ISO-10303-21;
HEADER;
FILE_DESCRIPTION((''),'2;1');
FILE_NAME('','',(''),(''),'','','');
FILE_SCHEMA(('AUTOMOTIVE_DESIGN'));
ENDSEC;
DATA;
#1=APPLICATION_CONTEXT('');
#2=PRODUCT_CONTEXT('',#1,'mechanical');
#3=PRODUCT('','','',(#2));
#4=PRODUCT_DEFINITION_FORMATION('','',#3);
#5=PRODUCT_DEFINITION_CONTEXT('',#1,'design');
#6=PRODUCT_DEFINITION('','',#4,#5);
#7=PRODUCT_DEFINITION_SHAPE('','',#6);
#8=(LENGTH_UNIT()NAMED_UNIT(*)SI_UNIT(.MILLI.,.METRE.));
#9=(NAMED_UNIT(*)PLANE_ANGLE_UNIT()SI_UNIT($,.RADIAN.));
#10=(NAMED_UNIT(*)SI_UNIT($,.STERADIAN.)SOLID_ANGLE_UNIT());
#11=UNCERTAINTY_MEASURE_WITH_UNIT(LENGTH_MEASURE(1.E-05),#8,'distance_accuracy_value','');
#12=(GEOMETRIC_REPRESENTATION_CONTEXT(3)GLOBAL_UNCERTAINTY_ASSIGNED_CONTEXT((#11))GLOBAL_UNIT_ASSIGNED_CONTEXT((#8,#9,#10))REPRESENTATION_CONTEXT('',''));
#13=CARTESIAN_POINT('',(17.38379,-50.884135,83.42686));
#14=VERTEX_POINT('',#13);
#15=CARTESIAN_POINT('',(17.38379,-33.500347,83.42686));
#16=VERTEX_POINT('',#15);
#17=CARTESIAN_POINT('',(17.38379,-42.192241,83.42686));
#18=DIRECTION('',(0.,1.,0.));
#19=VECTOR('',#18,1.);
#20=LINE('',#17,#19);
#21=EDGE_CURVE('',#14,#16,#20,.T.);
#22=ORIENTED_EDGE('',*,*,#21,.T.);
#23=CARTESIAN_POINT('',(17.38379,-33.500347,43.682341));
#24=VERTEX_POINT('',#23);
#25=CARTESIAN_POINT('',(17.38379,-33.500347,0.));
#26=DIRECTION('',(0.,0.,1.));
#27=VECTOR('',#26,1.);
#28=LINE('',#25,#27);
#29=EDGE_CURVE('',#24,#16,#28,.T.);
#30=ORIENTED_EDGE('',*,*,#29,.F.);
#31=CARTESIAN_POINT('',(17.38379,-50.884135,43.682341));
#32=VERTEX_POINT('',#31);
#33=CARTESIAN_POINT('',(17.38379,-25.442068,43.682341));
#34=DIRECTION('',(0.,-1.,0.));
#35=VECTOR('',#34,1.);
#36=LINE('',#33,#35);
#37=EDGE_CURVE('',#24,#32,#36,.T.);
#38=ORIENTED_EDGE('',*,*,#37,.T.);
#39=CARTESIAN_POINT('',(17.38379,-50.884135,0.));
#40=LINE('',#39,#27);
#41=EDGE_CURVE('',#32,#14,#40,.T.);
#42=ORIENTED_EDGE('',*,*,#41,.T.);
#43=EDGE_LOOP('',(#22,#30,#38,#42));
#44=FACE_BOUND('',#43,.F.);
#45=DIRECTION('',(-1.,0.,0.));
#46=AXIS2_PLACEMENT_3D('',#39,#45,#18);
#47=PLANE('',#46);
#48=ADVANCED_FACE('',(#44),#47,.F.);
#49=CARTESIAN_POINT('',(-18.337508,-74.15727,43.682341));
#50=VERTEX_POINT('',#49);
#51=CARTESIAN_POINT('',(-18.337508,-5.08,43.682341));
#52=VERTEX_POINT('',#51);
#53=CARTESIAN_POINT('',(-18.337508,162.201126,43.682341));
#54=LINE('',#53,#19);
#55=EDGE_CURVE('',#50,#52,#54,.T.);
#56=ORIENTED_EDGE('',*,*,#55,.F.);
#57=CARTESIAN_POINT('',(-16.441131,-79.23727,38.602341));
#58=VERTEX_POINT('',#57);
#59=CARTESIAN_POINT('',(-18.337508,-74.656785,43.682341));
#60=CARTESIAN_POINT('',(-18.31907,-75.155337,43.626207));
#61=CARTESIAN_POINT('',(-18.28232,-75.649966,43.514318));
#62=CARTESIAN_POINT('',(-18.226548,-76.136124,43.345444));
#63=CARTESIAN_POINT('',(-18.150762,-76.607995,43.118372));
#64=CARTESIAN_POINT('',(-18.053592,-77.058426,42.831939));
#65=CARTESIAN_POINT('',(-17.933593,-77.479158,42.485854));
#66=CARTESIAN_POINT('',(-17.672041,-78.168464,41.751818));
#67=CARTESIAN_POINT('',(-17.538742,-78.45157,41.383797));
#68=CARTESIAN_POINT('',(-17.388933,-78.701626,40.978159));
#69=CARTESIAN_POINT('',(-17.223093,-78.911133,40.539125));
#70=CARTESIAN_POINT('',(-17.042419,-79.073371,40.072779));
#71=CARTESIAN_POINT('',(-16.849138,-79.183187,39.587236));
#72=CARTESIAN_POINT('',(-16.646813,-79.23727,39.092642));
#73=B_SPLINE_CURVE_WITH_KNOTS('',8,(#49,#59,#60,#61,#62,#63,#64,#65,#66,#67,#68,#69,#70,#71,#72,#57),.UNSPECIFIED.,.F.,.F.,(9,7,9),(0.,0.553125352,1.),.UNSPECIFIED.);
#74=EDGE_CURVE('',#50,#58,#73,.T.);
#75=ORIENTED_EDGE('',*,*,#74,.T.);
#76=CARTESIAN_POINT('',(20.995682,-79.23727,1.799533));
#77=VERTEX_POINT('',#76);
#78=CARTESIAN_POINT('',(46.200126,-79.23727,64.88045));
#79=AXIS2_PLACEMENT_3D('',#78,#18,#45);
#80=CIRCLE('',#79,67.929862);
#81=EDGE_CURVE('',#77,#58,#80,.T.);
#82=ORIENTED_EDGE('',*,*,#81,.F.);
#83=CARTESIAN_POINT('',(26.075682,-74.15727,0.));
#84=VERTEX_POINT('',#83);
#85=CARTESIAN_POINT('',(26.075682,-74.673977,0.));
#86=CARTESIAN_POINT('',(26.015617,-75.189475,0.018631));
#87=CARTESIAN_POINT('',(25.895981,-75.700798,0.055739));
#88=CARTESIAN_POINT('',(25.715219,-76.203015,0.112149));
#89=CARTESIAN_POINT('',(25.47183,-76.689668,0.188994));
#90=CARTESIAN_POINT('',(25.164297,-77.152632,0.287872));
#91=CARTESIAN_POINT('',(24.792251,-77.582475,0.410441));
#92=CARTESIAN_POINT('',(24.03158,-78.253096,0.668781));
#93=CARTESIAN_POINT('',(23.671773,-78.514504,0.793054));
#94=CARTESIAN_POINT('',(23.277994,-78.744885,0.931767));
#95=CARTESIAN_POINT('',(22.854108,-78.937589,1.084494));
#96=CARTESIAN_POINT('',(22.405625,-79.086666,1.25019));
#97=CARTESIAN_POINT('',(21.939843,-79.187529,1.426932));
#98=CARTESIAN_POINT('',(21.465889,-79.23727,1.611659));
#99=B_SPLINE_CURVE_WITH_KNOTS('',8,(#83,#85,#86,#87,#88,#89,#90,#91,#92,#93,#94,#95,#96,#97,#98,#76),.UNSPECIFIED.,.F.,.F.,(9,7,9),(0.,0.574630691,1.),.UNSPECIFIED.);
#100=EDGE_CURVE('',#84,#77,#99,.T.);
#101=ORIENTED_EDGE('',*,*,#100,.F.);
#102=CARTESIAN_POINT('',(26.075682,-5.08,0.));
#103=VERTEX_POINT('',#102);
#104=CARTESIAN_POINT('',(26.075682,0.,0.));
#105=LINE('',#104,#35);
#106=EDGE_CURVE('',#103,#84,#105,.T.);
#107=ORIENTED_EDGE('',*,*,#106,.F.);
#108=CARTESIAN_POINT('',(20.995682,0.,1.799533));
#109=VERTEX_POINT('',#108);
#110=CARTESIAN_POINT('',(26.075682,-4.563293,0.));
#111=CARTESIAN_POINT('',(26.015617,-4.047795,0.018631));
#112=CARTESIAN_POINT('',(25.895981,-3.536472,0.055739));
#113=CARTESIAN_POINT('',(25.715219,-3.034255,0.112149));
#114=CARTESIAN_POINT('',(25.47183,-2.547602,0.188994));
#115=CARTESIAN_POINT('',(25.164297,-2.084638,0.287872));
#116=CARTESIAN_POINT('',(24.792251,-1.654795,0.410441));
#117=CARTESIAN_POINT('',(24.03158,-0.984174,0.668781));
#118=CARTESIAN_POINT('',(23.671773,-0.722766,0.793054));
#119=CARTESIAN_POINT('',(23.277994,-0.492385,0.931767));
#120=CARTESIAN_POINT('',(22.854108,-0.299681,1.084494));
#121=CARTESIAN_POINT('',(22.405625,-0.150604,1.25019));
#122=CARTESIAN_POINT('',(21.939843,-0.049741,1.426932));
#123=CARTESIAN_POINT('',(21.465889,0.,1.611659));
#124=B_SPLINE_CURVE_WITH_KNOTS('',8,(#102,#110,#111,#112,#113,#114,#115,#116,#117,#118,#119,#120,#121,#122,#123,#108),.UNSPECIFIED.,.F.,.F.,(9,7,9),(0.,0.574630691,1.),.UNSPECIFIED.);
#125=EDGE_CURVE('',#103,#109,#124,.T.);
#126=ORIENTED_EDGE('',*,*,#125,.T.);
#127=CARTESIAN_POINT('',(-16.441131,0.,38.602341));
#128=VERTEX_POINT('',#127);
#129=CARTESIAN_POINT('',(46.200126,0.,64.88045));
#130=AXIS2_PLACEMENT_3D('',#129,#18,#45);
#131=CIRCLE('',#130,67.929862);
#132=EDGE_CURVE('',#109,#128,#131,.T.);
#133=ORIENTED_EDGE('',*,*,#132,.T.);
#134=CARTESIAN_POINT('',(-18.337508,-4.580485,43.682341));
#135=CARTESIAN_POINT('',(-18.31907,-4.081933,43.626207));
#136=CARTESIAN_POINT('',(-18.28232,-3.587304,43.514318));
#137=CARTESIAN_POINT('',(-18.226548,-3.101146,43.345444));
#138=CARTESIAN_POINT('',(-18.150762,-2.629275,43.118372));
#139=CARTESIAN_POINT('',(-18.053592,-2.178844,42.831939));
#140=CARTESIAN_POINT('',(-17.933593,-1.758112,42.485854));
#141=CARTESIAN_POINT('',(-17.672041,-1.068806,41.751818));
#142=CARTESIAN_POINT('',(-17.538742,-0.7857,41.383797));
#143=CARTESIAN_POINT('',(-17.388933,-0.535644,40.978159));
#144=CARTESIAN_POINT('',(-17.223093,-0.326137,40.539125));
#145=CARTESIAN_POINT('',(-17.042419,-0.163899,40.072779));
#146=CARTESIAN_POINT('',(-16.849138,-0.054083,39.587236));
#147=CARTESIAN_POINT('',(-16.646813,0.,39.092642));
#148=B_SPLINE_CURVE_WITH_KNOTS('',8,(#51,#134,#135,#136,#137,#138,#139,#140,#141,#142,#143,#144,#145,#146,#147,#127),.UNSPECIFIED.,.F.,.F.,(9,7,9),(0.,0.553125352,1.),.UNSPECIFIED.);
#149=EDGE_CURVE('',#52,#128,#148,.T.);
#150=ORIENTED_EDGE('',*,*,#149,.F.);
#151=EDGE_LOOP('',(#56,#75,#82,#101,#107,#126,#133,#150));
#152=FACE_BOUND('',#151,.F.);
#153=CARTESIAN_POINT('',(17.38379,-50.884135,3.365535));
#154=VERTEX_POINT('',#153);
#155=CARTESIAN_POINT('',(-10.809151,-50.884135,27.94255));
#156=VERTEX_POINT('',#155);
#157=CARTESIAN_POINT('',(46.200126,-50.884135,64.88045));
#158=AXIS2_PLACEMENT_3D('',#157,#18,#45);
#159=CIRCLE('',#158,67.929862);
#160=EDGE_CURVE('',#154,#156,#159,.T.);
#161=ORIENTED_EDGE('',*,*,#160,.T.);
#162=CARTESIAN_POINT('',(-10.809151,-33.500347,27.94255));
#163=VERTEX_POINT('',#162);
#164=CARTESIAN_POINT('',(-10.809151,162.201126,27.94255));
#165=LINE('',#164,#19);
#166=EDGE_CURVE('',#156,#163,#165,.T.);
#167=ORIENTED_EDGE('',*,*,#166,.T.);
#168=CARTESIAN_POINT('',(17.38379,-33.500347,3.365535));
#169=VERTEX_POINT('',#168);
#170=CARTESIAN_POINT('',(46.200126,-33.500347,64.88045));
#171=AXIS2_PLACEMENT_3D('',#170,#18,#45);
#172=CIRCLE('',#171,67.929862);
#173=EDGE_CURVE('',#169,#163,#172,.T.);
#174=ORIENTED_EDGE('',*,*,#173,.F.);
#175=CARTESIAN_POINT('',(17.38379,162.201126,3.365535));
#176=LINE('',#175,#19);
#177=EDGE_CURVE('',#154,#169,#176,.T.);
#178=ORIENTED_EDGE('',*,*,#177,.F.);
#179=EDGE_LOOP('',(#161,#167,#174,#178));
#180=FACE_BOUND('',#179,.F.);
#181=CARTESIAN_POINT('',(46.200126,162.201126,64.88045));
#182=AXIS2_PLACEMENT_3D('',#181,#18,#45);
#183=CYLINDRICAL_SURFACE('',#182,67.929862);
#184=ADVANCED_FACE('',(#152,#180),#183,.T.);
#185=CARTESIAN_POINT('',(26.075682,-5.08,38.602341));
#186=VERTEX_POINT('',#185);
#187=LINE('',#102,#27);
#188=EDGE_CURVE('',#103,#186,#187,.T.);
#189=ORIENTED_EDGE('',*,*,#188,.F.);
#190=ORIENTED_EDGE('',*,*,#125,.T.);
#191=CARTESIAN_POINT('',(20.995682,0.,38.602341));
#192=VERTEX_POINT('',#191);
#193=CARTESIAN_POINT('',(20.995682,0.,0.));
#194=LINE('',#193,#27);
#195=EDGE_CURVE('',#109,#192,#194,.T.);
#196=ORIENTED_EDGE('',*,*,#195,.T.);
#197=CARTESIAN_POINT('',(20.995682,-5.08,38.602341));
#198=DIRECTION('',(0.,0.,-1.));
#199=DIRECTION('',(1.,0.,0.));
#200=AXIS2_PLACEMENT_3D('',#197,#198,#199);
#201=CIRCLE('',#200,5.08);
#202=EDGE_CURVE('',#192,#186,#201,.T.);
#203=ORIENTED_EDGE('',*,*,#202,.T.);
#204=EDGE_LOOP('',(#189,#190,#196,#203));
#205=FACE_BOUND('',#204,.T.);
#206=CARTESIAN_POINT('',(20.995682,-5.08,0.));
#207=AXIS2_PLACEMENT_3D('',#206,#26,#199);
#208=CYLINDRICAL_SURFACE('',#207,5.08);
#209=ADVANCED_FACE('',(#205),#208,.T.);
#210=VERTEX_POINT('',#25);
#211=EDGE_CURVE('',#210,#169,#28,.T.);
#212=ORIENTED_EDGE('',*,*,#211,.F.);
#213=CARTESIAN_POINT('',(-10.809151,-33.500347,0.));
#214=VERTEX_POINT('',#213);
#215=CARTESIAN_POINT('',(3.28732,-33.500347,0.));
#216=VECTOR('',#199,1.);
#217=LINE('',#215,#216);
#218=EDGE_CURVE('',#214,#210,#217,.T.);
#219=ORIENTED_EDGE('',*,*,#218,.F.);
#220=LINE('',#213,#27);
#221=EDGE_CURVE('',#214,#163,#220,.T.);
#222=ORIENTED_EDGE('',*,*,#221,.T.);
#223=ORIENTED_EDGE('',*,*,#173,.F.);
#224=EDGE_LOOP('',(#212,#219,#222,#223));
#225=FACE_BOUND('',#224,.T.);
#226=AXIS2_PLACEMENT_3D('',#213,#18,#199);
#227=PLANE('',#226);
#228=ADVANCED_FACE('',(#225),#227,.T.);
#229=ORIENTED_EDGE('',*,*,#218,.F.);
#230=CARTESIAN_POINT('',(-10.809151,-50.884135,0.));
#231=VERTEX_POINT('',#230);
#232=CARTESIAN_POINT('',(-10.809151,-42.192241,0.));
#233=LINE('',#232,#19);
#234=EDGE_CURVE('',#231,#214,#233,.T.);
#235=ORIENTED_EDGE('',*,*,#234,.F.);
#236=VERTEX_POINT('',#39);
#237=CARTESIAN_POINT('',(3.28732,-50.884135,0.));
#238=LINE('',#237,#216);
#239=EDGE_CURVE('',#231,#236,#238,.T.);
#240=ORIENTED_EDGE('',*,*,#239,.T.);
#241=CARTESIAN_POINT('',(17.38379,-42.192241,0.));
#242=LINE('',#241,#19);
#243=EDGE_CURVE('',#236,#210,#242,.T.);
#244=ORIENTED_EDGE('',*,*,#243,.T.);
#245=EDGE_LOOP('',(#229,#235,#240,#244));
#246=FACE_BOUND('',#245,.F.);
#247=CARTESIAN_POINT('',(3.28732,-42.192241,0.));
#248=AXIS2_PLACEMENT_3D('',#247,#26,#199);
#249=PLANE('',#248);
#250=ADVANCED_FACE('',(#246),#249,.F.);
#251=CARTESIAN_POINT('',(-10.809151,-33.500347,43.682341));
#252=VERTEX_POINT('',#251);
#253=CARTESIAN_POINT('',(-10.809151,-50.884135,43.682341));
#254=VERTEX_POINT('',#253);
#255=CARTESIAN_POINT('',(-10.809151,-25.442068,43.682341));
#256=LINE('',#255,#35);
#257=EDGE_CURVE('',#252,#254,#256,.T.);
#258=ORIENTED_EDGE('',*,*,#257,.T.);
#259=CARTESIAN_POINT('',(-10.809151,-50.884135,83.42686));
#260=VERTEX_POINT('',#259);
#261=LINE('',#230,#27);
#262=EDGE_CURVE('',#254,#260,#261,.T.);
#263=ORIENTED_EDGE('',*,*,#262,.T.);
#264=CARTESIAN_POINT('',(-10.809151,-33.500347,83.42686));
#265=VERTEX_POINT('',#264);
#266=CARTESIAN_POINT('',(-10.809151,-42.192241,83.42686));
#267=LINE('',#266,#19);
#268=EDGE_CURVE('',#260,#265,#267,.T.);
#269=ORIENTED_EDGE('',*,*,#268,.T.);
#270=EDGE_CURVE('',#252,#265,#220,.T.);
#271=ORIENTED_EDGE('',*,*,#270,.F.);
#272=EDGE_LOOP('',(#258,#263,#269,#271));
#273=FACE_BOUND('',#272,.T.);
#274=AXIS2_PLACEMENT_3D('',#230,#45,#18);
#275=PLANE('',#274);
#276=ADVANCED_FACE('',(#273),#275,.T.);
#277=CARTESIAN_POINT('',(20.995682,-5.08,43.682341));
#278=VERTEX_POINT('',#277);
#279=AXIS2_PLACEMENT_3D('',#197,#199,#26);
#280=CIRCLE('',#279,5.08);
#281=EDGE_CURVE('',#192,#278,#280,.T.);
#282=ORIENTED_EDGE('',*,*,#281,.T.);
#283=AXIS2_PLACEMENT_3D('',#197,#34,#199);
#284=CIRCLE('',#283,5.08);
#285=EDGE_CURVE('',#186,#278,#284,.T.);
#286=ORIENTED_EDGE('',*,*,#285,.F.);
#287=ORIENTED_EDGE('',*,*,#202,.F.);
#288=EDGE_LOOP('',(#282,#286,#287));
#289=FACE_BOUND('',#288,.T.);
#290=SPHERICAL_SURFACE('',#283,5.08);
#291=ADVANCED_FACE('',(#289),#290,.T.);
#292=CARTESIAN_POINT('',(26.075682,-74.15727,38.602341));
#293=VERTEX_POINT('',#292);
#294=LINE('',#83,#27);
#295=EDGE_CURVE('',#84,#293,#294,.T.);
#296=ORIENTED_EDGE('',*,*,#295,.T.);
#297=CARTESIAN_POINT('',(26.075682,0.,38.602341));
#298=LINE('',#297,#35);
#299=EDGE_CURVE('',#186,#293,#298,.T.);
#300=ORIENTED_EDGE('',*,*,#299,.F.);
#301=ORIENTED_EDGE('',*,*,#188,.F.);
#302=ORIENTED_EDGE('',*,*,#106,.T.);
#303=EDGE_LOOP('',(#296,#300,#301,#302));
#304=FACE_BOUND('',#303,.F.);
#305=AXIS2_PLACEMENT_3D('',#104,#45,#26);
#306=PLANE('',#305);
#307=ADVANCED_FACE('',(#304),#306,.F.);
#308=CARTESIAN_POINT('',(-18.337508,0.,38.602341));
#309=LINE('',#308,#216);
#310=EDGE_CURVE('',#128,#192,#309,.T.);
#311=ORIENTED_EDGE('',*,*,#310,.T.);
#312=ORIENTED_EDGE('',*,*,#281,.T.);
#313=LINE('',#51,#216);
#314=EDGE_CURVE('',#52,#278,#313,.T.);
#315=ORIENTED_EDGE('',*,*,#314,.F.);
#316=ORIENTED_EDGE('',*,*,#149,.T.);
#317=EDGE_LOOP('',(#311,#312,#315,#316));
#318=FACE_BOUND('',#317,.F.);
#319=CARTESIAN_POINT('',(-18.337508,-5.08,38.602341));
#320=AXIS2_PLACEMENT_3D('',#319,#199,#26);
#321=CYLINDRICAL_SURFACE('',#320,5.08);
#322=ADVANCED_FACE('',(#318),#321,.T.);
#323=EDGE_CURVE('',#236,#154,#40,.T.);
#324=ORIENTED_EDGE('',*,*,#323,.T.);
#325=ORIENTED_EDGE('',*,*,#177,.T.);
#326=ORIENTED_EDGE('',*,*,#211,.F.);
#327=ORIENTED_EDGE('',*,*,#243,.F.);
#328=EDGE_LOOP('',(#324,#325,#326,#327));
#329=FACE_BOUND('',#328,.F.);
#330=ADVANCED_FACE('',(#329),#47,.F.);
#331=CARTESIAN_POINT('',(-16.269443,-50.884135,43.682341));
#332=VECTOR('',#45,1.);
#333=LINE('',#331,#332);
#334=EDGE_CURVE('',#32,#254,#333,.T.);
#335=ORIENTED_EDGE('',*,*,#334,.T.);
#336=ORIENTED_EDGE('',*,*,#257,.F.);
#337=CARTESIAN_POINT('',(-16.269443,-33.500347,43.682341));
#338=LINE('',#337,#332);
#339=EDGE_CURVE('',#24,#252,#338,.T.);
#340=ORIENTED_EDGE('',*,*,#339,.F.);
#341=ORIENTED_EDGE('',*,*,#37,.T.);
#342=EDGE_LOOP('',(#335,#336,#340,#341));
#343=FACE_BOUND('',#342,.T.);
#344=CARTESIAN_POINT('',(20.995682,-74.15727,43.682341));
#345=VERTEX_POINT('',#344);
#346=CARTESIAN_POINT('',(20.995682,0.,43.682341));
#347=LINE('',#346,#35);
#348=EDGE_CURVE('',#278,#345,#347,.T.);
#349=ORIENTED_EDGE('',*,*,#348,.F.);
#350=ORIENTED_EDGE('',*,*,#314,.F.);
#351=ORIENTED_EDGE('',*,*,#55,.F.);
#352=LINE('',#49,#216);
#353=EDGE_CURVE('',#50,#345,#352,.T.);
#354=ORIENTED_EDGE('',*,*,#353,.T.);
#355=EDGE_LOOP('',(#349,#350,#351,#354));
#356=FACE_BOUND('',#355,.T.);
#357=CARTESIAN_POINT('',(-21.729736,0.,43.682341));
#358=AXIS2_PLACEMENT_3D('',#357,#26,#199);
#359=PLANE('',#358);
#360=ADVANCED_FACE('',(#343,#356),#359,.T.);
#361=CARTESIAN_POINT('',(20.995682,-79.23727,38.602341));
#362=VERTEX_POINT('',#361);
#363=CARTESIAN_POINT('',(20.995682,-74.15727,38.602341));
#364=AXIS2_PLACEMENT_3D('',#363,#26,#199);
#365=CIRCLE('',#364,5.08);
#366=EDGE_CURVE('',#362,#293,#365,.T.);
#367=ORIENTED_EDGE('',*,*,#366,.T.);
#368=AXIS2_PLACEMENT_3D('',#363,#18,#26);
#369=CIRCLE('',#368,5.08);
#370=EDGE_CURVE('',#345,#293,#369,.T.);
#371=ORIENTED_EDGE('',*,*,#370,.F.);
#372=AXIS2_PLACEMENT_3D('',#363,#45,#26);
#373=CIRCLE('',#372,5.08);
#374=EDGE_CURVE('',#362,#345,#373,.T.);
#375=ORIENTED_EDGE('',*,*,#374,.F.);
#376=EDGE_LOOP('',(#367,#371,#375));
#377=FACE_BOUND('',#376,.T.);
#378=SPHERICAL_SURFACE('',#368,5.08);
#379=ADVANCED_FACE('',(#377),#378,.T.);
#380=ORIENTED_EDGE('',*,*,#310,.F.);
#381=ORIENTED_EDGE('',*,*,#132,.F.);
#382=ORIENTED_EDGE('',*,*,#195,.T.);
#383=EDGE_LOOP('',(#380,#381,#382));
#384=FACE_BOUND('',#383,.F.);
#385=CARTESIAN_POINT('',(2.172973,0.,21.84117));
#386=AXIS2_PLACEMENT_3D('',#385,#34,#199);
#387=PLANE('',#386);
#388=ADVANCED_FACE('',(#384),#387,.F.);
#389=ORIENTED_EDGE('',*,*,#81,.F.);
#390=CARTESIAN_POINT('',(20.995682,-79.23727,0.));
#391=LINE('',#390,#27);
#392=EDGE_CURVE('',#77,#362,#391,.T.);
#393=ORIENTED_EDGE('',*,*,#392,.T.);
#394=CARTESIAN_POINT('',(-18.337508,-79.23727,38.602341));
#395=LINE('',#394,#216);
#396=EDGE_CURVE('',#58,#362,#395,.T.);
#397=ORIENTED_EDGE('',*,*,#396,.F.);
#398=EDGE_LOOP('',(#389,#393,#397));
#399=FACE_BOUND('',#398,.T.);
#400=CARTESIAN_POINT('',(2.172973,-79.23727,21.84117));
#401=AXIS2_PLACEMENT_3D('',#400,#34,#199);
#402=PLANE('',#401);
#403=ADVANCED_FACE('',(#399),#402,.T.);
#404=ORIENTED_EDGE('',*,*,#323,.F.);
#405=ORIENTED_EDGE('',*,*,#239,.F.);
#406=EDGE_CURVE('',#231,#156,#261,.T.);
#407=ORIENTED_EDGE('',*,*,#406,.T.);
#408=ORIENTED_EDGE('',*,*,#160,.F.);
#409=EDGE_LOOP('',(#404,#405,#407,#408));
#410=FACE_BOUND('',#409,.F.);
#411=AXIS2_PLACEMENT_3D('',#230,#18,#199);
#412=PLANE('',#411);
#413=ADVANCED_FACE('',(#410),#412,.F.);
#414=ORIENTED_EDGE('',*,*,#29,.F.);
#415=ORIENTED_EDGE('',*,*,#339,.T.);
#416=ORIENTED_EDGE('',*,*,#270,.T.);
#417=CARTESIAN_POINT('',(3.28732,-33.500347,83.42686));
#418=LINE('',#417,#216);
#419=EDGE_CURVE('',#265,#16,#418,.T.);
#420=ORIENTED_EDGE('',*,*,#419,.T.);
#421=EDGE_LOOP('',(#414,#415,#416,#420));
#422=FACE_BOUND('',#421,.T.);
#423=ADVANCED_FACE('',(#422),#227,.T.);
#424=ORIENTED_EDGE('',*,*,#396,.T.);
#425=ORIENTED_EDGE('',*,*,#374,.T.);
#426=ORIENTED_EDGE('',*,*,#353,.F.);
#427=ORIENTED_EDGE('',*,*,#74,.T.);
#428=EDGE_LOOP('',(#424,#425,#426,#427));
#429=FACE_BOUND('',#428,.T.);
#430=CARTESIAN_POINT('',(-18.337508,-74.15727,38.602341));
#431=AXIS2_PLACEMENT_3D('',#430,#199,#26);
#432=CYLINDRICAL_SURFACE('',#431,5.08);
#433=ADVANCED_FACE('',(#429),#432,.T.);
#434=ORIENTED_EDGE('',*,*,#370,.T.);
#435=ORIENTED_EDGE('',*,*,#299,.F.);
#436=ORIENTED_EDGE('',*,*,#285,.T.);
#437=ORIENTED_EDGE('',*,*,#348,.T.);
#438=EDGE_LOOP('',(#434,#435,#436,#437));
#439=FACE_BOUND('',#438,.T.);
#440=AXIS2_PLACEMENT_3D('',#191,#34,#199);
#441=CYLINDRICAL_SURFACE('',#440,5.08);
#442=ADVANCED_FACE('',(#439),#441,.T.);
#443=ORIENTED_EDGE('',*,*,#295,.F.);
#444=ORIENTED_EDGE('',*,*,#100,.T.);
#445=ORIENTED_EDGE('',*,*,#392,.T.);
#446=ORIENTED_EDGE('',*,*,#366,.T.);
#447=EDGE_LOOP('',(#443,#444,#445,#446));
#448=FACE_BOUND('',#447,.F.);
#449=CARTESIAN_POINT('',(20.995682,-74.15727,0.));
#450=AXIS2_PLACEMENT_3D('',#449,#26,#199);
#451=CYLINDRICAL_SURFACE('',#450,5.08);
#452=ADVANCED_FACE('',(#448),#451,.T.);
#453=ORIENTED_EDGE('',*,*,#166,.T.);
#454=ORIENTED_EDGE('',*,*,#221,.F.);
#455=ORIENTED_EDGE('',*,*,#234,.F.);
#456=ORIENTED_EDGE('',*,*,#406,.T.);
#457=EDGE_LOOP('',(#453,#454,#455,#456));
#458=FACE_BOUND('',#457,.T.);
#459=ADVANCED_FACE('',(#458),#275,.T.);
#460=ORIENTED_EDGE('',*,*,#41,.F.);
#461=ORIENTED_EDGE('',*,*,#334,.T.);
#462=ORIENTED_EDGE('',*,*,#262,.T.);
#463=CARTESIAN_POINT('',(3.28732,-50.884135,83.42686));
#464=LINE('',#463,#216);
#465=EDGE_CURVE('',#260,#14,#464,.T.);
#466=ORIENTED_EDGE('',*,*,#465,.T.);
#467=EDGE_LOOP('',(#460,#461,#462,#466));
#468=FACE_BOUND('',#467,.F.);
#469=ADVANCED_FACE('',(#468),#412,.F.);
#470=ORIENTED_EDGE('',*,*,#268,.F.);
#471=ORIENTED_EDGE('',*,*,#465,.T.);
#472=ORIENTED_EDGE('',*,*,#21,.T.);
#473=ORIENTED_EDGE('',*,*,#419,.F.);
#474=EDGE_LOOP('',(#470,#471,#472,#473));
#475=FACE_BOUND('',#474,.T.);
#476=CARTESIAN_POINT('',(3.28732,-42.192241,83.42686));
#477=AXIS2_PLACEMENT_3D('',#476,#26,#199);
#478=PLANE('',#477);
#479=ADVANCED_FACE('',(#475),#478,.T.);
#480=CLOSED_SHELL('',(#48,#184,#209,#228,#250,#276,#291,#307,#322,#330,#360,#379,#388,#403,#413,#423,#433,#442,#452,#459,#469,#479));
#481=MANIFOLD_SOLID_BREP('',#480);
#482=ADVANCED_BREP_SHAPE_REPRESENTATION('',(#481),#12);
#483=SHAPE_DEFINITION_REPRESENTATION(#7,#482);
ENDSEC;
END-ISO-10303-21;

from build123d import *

# Parameters (mm, degrees)
F0_W        = 47.8054173291
F0_H        = 43.6823405325
F1_DEPTH    = 79.23727
F2_T1_DEPTH = 403.639522146
F3_R        = 5.08
F4_W        = 28.1929401681
F4_H        = 17.383787781
F5_DEPTH    = 83.42686


# Not quite as in the source:
# - a fillet or chamfer that OpenCascade refuses, or shapes differently, is made with other operations: its cross-section is extruded or revolved along the edge and cut away or added


with BuildPart() as f1:
    # F0 (on Front) → F1 (new body)
    with BuildSketch(Plane.XZ):
        with Locations((2.172973007, 21.8411702663)):
            Rectangle(F0_W, F0_H)
    extrude(amount=F1_DEPTH)

    # F2: fillet of radius 67.9298616849 on 1 edges, made by hand

    # F2_s2 → F2_t1 (cut)
    with BuildSketch(Plane.XZ.offset(-162.201126073)):
        with BuildLine():
            ThreePointArc((-21.7297356576, 64.8804504292), (-8.4877009093, 24.5851939655), (26.0756816715, 0))
            Line((26.0756816715, 0), (-21.7297356576, 0))
            Line((-21.7297356576, 0), (-21.7297356576, 64.8804504292))
        make_face()
    extrude(amount=F2_T1_DEPTH, mode=Mode.SUBTRACT)

    # F3
    f3_edges = [f1.edges().sort_by_distance(p)[0] for p in [
        (26.075682, -39.618635, 43.682341),
        (3.869087, -79.23727, 43.682341),
        (26.075682, -79.23727, 21.84117),
        (26.075682, 0, 21.84117),
        (3.869087, 0, 43.682341),
    ]]
    fillet(f3_edges, radius=F3_R)

    # F4 (on Top) → F5 (join)
    with BuildSketch(Plane.XY):
        with Locations((3.2873195596, -42.192241177)):
            Rectangle(F4_W, F4_H)
    extrude(amount=F5_DEPTH)


solid = f1.part
